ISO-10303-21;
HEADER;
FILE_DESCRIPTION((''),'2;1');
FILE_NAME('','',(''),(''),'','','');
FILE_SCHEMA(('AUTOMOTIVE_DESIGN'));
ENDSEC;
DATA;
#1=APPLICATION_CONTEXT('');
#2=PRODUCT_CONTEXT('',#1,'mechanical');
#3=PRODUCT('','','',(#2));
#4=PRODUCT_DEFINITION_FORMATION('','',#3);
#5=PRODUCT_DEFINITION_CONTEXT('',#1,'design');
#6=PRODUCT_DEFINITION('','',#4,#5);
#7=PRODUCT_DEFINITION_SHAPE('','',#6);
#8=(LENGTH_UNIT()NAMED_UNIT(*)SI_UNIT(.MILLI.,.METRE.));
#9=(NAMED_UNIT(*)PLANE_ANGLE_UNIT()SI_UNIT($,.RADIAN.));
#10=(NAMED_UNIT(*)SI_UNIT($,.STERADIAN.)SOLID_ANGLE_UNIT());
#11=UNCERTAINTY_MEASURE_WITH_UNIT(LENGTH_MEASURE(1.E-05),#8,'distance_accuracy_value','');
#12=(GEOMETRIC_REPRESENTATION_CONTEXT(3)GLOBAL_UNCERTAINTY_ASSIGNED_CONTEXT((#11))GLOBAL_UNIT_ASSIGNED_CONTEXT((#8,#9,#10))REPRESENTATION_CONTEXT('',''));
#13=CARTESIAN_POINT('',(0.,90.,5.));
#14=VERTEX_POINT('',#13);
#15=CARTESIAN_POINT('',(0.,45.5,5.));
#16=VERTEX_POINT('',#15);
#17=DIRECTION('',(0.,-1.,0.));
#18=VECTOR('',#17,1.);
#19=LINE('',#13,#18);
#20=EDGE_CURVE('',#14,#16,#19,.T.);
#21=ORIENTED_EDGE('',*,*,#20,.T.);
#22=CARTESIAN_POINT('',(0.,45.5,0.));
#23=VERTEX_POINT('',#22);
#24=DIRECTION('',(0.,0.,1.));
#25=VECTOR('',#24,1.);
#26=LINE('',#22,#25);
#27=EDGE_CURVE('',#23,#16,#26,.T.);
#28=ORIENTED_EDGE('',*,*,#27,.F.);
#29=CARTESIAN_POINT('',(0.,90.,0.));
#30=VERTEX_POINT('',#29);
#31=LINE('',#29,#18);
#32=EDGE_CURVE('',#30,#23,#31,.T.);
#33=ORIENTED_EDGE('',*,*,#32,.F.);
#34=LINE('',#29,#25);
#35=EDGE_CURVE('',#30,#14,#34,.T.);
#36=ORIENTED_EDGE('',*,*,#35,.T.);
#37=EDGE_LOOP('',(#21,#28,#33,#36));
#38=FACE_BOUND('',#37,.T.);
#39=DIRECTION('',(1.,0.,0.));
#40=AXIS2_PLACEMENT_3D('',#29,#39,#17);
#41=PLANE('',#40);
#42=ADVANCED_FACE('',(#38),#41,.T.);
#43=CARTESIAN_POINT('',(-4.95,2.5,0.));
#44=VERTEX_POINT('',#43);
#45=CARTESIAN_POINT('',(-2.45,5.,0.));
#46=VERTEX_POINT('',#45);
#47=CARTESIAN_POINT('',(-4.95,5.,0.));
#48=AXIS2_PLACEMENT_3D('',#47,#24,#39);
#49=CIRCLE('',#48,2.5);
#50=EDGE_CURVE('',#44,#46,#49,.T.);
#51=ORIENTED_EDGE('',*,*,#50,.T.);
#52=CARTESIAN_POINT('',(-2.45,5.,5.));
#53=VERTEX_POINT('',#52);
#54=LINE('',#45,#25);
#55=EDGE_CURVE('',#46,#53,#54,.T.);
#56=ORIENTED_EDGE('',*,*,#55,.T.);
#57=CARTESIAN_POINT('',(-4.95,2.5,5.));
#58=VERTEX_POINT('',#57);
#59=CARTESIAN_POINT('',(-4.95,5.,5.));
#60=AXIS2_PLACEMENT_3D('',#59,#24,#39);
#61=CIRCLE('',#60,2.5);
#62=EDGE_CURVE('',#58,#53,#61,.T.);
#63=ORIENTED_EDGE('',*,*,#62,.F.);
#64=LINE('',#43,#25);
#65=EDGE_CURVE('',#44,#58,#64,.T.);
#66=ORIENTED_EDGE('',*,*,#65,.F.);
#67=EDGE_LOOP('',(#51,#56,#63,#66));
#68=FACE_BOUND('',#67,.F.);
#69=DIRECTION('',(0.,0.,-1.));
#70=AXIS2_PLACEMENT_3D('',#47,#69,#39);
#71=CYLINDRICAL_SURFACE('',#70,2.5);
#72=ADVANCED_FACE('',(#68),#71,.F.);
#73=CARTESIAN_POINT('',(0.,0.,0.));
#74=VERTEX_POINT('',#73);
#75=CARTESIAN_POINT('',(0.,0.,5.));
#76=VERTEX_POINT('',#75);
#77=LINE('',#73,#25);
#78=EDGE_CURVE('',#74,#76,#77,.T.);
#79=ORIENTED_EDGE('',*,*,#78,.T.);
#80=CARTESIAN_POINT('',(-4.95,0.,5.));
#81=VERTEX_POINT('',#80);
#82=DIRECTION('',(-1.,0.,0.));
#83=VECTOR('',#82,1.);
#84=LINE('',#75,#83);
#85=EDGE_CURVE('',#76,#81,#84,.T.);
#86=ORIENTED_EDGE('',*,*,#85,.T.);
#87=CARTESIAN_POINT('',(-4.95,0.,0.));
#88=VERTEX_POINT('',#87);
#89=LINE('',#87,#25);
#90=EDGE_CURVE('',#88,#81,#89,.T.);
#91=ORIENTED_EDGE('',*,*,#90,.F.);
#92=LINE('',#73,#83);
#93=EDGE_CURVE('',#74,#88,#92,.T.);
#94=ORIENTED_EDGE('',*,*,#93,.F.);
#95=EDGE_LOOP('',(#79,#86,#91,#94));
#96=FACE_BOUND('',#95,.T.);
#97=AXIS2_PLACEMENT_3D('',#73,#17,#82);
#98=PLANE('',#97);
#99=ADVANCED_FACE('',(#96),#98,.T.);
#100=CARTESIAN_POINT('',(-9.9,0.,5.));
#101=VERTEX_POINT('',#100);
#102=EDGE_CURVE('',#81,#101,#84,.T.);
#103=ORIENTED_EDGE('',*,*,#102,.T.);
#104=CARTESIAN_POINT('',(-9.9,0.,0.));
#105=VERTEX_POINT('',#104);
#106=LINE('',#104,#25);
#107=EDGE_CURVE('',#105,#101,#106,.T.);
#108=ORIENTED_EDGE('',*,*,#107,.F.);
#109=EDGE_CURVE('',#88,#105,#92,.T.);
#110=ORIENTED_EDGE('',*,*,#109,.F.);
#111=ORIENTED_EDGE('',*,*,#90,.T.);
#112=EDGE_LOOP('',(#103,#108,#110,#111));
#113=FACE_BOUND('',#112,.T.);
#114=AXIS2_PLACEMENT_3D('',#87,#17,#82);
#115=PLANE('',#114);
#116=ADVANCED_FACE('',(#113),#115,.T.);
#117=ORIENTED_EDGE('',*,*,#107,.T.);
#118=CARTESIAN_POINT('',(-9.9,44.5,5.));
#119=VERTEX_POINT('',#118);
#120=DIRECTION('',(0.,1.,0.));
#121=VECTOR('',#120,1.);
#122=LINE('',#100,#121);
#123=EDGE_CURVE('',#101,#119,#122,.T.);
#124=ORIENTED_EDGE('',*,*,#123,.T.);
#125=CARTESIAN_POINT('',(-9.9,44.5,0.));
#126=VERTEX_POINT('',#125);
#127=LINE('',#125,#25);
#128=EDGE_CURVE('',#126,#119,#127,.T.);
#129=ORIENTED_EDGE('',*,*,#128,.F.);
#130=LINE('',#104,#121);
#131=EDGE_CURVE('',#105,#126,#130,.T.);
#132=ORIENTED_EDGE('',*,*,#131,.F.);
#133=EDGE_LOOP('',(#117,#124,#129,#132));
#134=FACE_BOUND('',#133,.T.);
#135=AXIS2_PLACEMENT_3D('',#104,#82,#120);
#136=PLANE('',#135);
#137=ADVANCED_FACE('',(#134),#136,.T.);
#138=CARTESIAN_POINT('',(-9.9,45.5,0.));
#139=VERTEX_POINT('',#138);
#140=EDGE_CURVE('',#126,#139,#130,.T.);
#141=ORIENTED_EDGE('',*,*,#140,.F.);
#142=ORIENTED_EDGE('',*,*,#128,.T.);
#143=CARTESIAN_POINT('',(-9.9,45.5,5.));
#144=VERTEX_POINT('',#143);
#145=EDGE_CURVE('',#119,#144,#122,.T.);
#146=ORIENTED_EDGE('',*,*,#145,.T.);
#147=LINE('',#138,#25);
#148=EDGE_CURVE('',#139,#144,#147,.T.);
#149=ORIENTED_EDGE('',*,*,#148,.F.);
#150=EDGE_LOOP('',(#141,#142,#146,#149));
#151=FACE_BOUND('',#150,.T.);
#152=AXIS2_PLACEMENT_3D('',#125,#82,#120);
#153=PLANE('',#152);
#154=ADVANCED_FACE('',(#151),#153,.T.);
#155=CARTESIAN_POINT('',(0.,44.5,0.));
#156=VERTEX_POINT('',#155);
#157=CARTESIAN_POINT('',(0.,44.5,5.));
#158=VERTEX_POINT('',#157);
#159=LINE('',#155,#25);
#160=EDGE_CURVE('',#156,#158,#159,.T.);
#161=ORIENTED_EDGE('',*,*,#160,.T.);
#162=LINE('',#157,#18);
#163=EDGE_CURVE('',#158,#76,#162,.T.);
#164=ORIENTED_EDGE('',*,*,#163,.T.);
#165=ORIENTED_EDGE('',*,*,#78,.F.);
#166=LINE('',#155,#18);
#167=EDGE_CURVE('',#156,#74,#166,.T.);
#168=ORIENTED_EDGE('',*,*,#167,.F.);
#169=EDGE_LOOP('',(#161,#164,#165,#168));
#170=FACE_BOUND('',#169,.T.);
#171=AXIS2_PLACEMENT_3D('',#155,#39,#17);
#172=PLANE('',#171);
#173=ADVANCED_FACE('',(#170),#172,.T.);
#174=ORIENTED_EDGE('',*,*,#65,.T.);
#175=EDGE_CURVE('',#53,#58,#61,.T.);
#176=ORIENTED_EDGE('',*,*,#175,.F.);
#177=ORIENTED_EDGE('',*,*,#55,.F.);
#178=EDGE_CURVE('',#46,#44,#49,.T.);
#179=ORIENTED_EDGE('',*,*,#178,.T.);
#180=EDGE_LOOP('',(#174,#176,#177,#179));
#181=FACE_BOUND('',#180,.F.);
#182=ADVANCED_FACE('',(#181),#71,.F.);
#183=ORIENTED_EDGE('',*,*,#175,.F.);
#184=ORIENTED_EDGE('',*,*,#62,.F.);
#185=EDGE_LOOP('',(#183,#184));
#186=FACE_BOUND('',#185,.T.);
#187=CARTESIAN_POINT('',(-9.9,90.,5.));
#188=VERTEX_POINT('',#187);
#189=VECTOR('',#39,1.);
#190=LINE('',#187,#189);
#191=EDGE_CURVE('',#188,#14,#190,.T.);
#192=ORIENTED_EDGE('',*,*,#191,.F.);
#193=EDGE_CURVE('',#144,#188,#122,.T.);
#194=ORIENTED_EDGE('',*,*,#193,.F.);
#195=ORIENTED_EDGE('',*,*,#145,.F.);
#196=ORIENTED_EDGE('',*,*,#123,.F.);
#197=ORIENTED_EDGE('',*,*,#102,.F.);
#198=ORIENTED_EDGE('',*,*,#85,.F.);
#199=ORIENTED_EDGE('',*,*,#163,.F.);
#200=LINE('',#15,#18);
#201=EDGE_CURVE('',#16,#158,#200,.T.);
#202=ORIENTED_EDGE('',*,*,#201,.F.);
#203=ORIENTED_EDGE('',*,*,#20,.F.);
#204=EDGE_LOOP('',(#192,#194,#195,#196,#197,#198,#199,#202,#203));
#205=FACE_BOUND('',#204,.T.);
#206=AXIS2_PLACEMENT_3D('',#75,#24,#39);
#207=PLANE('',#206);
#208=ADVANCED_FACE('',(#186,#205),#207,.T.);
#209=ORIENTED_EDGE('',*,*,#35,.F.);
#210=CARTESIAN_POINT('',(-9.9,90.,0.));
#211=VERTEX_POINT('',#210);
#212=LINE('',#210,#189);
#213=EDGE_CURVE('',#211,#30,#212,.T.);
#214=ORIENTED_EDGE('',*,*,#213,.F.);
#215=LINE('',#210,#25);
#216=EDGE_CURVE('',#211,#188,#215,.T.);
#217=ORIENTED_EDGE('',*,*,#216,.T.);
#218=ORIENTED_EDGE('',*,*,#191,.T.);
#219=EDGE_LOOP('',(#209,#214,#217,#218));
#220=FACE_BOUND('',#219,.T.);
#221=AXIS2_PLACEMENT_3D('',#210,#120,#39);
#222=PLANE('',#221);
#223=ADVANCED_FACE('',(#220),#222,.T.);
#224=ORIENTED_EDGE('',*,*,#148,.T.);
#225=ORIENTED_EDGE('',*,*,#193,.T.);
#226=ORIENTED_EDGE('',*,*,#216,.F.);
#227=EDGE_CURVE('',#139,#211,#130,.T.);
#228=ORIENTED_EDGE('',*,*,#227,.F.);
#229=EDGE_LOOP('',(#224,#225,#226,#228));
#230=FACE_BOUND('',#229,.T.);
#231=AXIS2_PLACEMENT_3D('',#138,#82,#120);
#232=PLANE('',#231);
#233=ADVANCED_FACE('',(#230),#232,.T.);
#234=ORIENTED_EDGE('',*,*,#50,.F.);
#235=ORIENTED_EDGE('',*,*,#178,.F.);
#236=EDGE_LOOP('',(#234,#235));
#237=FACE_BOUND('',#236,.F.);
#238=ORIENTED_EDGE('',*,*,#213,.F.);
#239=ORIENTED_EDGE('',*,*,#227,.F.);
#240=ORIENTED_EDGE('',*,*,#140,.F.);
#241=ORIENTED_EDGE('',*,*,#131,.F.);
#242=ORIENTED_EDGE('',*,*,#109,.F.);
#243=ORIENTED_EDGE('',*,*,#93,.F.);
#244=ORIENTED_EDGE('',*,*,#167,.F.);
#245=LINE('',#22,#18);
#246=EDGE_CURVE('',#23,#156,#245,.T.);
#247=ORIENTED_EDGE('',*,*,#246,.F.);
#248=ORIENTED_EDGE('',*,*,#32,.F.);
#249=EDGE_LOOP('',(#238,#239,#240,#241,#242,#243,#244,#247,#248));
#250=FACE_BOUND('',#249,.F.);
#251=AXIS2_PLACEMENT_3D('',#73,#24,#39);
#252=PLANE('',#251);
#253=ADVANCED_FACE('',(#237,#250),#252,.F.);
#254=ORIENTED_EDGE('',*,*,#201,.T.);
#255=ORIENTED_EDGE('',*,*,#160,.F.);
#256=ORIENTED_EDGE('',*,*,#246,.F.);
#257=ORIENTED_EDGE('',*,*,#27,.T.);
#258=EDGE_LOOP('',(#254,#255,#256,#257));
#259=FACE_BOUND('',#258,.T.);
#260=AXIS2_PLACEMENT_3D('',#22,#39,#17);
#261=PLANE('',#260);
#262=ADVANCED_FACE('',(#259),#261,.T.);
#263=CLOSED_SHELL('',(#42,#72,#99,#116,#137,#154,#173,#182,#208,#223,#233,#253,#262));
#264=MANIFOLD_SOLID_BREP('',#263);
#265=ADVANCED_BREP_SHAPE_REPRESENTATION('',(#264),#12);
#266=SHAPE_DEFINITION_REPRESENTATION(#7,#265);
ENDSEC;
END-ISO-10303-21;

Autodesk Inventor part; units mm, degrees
ref_plane "YZ Plane" through (0, 0, 0) normal (1, 0, 0) x (0, 1, 0)
ref_plane "XZ Plane" through (0, 0, 0) normal (0, 1, 0) x (-1, 0, 0)
ref_plane "XY Plane" through (0, 0, 0) normal (0, 0, 1) x (1, 0, 0)
sketch "Sketch2" plane through (0, 0, 0) normal (0, 0, 1) x (1, 0, 0)
  line L0 (0, 0) -> (-9.9, 0)
  line L1 (-4.95, 0) -> (-4.95, 2.5)
  line L2 (-4.95, 0) -> (-2.45, 0) construction
  circle A0 centre (-4.95, 5) radius 2.5
  line L3 (-4.95, 7.5) -> (32.05, 7.5) construction
  line L4 (0, 44.5) -> (0, 0)
  line L5 (0, 0) -> (-9.9, 0)
  line L6 (-9.9, 0) -> (-9.9, 44.5)
  line L7 (0, 45.5) -> (0, 0)
  line L8 (0, 0) -> (-9.9, 0)
  line L9 (-9.9, 0) -> (-9.9, 45.5)
  line L10 (-4.95, 7.5) -> (66.05, 7.5) construction
  line L11 (0, 0) -> (-9.9, 0)
  line L12 (-9.9, 0) -> (-9.9, 90)
  line L13 (-9.9, 90) -> (0, 90)
  line L14 (0, 90) -> (0, 0)
  dimension "d35" = 5
  dimension "d33" = 2.5
  dimension "d34" = 90
  dimension "d46" = 9.9
  dimension "d47" = 90
extrude "Extrusion6" add sketch "Sketch2" along normal blind 5
properties part number "Elbow_Cube_Holder_TestFit_V2"
